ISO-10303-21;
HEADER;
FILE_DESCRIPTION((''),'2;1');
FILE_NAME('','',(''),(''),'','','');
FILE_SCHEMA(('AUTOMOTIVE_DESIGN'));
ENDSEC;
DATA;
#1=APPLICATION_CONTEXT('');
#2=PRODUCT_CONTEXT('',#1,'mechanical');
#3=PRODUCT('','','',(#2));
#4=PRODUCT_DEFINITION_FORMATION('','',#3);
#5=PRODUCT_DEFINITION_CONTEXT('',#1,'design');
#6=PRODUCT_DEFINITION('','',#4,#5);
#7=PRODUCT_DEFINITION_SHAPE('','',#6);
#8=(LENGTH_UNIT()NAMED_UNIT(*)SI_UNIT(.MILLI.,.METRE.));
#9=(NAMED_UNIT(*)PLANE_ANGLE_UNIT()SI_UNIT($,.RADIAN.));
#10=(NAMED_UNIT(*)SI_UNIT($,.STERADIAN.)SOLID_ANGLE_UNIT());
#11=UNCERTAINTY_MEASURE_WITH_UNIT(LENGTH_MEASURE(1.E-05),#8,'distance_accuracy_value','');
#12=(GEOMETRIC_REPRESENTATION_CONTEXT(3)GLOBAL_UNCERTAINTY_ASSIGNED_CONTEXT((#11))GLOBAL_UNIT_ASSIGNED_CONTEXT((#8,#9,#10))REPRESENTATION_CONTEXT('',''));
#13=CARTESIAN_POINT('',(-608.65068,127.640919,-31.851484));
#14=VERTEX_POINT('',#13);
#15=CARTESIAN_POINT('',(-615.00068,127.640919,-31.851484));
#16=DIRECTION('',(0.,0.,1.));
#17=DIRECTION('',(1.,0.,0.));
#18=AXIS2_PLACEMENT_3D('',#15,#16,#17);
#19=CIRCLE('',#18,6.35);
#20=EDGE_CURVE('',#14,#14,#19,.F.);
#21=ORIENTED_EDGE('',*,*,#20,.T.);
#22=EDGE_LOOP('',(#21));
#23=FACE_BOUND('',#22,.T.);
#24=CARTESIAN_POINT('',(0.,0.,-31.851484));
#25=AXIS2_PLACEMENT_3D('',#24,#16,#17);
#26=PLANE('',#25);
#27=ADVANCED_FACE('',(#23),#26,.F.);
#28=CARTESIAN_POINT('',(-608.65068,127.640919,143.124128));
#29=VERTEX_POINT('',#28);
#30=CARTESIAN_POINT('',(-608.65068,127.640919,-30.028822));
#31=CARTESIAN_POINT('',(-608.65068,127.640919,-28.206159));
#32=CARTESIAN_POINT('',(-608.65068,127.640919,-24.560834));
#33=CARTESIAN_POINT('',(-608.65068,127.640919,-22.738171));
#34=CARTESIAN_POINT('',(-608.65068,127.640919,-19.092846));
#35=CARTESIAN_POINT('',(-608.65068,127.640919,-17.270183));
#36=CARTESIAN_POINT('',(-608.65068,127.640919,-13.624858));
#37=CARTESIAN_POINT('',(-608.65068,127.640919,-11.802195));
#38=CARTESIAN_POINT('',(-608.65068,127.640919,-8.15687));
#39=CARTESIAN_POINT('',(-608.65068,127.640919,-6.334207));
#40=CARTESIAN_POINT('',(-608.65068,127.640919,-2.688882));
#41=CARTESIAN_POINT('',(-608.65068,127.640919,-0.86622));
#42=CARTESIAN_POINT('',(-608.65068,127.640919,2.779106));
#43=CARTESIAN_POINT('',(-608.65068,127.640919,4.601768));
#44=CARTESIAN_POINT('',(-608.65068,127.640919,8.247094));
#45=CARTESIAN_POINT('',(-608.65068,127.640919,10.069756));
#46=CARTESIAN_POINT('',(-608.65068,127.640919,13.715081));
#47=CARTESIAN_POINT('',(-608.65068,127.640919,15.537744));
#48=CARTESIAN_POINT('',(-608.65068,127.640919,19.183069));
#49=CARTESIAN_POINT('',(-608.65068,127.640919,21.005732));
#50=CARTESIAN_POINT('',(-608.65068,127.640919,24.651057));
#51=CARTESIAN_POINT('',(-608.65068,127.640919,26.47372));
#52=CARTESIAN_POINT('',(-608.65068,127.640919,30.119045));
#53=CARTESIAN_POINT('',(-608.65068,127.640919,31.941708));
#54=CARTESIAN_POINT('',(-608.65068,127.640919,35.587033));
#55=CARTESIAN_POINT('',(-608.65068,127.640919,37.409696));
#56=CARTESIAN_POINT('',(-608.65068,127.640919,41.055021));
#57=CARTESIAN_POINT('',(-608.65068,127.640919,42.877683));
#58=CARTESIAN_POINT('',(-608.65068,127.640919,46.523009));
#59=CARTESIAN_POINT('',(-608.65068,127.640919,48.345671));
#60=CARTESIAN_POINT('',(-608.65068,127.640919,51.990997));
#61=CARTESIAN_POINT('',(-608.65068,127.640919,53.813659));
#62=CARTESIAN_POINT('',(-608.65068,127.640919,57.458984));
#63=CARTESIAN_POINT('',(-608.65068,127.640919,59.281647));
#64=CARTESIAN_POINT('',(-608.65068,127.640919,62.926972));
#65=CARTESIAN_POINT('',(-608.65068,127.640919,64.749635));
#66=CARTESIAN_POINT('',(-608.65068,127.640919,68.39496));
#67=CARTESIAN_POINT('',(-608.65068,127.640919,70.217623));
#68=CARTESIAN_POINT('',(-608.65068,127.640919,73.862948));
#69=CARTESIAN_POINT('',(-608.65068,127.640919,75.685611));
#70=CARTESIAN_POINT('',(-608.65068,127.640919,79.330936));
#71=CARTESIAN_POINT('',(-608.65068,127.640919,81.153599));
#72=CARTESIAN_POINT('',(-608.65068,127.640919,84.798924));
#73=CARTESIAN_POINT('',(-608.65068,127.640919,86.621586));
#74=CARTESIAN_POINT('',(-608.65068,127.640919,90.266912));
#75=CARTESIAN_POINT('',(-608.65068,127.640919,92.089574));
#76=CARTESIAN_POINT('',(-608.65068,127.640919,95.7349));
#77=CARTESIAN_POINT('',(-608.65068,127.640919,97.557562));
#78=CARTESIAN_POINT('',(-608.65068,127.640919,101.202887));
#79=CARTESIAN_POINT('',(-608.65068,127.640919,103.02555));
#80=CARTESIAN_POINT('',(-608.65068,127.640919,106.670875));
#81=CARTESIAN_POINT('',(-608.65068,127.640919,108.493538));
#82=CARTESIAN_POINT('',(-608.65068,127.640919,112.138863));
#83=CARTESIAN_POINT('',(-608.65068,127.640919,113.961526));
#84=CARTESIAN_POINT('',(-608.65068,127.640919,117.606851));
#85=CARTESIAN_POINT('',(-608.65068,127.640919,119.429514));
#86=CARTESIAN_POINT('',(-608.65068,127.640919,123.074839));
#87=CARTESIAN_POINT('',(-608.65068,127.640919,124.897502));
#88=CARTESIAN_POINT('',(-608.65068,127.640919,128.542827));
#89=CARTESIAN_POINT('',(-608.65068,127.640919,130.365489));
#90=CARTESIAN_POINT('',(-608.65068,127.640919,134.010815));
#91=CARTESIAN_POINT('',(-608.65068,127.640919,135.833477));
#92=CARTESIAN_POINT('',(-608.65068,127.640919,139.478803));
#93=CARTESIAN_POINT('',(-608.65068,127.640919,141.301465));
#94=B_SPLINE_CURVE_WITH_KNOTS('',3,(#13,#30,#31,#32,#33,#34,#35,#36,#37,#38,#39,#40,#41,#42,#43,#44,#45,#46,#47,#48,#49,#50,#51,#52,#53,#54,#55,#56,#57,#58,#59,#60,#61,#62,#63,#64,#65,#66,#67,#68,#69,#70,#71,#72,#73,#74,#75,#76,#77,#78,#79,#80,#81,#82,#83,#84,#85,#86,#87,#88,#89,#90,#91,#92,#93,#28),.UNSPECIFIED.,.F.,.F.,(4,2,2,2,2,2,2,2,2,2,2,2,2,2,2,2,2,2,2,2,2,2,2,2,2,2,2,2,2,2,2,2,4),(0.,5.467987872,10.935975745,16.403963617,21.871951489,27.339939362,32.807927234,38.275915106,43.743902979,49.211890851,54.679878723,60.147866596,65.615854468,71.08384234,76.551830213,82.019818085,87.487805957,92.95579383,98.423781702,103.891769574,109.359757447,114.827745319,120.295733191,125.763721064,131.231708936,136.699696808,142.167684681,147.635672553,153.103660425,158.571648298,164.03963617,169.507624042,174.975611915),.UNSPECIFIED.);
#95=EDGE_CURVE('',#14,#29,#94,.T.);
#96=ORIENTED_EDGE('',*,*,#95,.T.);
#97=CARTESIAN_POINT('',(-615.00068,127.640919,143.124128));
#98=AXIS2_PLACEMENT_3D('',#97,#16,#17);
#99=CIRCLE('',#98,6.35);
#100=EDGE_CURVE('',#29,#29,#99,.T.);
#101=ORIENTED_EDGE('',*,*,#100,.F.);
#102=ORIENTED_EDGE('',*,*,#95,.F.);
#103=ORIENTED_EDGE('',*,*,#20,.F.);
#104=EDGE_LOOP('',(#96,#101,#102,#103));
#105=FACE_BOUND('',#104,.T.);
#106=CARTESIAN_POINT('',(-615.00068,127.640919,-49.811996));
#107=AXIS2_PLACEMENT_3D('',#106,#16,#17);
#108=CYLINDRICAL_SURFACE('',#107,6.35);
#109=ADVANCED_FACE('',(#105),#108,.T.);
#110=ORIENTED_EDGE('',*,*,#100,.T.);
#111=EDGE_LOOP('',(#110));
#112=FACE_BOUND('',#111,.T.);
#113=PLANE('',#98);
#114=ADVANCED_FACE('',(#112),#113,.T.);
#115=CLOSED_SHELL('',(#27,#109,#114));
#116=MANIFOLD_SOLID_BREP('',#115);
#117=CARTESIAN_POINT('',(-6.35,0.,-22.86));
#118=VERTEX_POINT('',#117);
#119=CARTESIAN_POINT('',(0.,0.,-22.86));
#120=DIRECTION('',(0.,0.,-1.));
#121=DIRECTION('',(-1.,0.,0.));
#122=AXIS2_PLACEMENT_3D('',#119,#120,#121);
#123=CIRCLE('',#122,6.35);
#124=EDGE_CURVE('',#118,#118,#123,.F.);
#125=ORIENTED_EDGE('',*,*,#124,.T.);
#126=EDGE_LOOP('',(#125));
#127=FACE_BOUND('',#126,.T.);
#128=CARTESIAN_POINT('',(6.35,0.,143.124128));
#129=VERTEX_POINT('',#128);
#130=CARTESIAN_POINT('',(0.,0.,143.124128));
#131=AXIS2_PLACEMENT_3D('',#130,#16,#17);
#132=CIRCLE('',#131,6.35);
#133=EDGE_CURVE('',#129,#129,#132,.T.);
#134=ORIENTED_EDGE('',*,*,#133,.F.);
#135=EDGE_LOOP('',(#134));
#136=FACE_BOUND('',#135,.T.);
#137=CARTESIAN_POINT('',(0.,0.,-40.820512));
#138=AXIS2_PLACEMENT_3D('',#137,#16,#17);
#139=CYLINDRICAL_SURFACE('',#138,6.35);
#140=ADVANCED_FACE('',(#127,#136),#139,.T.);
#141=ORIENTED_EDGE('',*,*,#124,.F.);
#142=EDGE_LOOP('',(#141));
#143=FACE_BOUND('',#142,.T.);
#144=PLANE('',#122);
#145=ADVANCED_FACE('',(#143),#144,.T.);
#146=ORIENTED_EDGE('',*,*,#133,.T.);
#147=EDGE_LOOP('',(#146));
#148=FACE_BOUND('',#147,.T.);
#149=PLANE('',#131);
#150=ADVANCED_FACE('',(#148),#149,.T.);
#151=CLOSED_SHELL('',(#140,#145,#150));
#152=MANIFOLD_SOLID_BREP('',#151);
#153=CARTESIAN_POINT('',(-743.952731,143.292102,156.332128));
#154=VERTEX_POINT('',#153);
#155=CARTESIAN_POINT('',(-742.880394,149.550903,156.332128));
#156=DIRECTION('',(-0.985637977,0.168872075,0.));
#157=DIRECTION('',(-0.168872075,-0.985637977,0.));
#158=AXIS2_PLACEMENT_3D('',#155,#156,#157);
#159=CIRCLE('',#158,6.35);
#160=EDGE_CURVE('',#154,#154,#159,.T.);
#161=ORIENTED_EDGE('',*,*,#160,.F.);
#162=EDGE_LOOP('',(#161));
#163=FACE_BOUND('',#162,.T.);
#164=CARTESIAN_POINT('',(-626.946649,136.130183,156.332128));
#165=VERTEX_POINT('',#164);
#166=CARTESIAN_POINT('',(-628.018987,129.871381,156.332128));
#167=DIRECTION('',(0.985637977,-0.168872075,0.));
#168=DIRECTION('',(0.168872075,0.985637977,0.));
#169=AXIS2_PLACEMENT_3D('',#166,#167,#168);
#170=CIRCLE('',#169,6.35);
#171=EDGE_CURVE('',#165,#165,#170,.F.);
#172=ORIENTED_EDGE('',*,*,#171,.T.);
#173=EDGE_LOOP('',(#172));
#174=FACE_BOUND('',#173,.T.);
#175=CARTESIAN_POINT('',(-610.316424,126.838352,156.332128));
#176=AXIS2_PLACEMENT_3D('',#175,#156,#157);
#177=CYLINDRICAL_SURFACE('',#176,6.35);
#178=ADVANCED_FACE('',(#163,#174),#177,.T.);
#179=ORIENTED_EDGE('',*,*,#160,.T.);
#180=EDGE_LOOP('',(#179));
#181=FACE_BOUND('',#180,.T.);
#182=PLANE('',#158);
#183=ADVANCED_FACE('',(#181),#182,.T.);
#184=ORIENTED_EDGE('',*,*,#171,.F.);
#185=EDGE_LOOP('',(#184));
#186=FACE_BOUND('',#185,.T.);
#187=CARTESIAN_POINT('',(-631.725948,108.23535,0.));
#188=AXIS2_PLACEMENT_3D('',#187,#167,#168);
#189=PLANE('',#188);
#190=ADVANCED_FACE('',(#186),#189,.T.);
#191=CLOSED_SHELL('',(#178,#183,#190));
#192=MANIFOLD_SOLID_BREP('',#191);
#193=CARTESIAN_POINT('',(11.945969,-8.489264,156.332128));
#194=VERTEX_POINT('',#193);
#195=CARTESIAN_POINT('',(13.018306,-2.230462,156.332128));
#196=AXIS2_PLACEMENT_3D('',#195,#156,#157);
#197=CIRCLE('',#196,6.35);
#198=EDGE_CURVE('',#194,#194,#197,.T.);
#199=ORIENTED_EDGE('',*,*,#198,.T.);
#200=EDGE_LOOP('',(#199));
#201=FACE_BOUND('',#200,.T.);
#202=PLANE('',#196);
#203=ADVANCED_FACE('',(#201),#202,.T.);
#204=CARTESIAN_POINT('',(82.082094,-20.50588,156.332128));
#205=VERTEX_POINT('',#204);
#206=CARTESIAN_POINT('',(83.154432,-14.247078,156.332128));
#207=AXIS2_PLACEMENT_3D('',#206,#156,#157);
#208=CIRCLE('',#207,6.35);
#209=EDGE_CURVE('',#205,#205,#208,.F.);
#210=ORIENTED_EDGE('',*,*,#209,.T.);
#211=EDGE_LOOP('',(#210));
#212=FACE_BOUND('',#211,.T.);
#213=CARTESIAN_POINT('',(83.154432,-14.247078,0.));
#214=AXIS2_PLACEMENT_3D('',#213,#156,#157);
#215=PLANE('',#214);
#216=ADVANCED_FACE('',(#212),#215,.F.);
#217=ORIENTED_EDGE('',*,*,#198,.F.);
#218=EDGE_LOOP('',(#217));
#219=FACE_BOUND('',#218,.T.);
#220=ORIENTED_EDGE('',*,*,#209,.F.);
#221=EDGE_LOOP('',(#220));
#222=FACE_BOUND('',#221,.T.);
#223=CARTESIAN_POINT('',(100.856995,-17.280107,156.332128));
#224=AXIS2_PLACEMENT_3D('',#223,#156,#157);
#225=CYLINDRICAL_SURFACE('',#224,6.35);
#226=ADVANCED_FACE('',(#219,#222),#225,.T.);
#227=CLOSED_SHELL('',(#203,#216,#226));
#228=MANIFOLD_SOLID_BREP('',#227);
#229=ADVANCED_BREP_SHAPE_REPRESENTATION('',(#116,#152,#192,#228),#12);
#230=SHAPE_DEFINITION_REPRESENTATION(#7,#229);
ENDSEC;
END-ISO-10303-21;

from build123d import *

# Parameters (mm, degrees)
BOSS_EXTRUDE1_START     = -71.1581
BOSS_EXTRUDE1_OUTLINE_R = 6.35
BOSS_EXTRUDE1_DEPTH     = 71.1581
SKETCH3_R               = 6.35
BOSS_EXTRUDE2_DEPTH     = 165.984127761
SKETCH5_R               = 6.35
BOSS_EXTRUDE3_DEPTH     = 116.535086485
SKETCH6_R               = 6.35
BOSS_EXTRUDE4_DEPTH     = 174.975611915


# Read off the part's stored shape, not the designer's step: Boss-Extrude1
with BuildPart() as part:
    # Boss-Extrude1 outline → Boss-Extrude1 (new body)
    with BuildSketch(Plane(origin=(13.018306404, -2.230462367, 0), x_dir=(0.16887207501251916, 0.9856379772923556, 0), z_dir=(-0.9856379772923557, 0.16887207501251916, 0)).offset(BOSS_EXTRUDE1_START)):
        with Locations((0, -156.332127761)):
            Circle(BOSS_EXTRUDE1_OUTLINE_R)
    extrude(amount=BOSS_EXTRUDE1_DEPTH)


with BuildPart() as body_2:
    # Sketch3 → Boss-Extrude2 (new body)
    with BuildSketch(Plane.XY.offset(143.124127761)):
        Circle(SKETCH3_R)
    extrude(amount=-BOSS_EXTRUDE2_DEPTH)


with BuildPart() as body_3:
    # Sketch5 → Boss-Extrude3 (new body)
    with BuildSketch(Plane(origin=(-746.587354672, 127.914872059, 0), x_dir=(0.1688720750125156, 0.9856379772923564, -3.034930787787326e-15), z_dir=(-0.9856379772923564, 0.1688720750125156, 1.2809329124968532e-15))):
        with Locations(Location((21.951296195, -156.332127761, 0), (0, 0, 180))):
            Circle(SKETCH5_R)
    extrude(amount=-BOSS_EXTRUDE3_DEPTH)


with BuildPart() as body_4:
    # Sketch6 → Boss-Extrude4 (new body)
    with BuildSketch(Plane.XY.offset(143.124127761)):
        with Locations((-615.000680403, 127.640919006)):
            Circle(SKETCH6_R)
    extrude(amount=-BOSS_EXTRUDE4_DEPTH)


solid = Compound([part.part, body_2.part, body_3.part, body_4.part])
